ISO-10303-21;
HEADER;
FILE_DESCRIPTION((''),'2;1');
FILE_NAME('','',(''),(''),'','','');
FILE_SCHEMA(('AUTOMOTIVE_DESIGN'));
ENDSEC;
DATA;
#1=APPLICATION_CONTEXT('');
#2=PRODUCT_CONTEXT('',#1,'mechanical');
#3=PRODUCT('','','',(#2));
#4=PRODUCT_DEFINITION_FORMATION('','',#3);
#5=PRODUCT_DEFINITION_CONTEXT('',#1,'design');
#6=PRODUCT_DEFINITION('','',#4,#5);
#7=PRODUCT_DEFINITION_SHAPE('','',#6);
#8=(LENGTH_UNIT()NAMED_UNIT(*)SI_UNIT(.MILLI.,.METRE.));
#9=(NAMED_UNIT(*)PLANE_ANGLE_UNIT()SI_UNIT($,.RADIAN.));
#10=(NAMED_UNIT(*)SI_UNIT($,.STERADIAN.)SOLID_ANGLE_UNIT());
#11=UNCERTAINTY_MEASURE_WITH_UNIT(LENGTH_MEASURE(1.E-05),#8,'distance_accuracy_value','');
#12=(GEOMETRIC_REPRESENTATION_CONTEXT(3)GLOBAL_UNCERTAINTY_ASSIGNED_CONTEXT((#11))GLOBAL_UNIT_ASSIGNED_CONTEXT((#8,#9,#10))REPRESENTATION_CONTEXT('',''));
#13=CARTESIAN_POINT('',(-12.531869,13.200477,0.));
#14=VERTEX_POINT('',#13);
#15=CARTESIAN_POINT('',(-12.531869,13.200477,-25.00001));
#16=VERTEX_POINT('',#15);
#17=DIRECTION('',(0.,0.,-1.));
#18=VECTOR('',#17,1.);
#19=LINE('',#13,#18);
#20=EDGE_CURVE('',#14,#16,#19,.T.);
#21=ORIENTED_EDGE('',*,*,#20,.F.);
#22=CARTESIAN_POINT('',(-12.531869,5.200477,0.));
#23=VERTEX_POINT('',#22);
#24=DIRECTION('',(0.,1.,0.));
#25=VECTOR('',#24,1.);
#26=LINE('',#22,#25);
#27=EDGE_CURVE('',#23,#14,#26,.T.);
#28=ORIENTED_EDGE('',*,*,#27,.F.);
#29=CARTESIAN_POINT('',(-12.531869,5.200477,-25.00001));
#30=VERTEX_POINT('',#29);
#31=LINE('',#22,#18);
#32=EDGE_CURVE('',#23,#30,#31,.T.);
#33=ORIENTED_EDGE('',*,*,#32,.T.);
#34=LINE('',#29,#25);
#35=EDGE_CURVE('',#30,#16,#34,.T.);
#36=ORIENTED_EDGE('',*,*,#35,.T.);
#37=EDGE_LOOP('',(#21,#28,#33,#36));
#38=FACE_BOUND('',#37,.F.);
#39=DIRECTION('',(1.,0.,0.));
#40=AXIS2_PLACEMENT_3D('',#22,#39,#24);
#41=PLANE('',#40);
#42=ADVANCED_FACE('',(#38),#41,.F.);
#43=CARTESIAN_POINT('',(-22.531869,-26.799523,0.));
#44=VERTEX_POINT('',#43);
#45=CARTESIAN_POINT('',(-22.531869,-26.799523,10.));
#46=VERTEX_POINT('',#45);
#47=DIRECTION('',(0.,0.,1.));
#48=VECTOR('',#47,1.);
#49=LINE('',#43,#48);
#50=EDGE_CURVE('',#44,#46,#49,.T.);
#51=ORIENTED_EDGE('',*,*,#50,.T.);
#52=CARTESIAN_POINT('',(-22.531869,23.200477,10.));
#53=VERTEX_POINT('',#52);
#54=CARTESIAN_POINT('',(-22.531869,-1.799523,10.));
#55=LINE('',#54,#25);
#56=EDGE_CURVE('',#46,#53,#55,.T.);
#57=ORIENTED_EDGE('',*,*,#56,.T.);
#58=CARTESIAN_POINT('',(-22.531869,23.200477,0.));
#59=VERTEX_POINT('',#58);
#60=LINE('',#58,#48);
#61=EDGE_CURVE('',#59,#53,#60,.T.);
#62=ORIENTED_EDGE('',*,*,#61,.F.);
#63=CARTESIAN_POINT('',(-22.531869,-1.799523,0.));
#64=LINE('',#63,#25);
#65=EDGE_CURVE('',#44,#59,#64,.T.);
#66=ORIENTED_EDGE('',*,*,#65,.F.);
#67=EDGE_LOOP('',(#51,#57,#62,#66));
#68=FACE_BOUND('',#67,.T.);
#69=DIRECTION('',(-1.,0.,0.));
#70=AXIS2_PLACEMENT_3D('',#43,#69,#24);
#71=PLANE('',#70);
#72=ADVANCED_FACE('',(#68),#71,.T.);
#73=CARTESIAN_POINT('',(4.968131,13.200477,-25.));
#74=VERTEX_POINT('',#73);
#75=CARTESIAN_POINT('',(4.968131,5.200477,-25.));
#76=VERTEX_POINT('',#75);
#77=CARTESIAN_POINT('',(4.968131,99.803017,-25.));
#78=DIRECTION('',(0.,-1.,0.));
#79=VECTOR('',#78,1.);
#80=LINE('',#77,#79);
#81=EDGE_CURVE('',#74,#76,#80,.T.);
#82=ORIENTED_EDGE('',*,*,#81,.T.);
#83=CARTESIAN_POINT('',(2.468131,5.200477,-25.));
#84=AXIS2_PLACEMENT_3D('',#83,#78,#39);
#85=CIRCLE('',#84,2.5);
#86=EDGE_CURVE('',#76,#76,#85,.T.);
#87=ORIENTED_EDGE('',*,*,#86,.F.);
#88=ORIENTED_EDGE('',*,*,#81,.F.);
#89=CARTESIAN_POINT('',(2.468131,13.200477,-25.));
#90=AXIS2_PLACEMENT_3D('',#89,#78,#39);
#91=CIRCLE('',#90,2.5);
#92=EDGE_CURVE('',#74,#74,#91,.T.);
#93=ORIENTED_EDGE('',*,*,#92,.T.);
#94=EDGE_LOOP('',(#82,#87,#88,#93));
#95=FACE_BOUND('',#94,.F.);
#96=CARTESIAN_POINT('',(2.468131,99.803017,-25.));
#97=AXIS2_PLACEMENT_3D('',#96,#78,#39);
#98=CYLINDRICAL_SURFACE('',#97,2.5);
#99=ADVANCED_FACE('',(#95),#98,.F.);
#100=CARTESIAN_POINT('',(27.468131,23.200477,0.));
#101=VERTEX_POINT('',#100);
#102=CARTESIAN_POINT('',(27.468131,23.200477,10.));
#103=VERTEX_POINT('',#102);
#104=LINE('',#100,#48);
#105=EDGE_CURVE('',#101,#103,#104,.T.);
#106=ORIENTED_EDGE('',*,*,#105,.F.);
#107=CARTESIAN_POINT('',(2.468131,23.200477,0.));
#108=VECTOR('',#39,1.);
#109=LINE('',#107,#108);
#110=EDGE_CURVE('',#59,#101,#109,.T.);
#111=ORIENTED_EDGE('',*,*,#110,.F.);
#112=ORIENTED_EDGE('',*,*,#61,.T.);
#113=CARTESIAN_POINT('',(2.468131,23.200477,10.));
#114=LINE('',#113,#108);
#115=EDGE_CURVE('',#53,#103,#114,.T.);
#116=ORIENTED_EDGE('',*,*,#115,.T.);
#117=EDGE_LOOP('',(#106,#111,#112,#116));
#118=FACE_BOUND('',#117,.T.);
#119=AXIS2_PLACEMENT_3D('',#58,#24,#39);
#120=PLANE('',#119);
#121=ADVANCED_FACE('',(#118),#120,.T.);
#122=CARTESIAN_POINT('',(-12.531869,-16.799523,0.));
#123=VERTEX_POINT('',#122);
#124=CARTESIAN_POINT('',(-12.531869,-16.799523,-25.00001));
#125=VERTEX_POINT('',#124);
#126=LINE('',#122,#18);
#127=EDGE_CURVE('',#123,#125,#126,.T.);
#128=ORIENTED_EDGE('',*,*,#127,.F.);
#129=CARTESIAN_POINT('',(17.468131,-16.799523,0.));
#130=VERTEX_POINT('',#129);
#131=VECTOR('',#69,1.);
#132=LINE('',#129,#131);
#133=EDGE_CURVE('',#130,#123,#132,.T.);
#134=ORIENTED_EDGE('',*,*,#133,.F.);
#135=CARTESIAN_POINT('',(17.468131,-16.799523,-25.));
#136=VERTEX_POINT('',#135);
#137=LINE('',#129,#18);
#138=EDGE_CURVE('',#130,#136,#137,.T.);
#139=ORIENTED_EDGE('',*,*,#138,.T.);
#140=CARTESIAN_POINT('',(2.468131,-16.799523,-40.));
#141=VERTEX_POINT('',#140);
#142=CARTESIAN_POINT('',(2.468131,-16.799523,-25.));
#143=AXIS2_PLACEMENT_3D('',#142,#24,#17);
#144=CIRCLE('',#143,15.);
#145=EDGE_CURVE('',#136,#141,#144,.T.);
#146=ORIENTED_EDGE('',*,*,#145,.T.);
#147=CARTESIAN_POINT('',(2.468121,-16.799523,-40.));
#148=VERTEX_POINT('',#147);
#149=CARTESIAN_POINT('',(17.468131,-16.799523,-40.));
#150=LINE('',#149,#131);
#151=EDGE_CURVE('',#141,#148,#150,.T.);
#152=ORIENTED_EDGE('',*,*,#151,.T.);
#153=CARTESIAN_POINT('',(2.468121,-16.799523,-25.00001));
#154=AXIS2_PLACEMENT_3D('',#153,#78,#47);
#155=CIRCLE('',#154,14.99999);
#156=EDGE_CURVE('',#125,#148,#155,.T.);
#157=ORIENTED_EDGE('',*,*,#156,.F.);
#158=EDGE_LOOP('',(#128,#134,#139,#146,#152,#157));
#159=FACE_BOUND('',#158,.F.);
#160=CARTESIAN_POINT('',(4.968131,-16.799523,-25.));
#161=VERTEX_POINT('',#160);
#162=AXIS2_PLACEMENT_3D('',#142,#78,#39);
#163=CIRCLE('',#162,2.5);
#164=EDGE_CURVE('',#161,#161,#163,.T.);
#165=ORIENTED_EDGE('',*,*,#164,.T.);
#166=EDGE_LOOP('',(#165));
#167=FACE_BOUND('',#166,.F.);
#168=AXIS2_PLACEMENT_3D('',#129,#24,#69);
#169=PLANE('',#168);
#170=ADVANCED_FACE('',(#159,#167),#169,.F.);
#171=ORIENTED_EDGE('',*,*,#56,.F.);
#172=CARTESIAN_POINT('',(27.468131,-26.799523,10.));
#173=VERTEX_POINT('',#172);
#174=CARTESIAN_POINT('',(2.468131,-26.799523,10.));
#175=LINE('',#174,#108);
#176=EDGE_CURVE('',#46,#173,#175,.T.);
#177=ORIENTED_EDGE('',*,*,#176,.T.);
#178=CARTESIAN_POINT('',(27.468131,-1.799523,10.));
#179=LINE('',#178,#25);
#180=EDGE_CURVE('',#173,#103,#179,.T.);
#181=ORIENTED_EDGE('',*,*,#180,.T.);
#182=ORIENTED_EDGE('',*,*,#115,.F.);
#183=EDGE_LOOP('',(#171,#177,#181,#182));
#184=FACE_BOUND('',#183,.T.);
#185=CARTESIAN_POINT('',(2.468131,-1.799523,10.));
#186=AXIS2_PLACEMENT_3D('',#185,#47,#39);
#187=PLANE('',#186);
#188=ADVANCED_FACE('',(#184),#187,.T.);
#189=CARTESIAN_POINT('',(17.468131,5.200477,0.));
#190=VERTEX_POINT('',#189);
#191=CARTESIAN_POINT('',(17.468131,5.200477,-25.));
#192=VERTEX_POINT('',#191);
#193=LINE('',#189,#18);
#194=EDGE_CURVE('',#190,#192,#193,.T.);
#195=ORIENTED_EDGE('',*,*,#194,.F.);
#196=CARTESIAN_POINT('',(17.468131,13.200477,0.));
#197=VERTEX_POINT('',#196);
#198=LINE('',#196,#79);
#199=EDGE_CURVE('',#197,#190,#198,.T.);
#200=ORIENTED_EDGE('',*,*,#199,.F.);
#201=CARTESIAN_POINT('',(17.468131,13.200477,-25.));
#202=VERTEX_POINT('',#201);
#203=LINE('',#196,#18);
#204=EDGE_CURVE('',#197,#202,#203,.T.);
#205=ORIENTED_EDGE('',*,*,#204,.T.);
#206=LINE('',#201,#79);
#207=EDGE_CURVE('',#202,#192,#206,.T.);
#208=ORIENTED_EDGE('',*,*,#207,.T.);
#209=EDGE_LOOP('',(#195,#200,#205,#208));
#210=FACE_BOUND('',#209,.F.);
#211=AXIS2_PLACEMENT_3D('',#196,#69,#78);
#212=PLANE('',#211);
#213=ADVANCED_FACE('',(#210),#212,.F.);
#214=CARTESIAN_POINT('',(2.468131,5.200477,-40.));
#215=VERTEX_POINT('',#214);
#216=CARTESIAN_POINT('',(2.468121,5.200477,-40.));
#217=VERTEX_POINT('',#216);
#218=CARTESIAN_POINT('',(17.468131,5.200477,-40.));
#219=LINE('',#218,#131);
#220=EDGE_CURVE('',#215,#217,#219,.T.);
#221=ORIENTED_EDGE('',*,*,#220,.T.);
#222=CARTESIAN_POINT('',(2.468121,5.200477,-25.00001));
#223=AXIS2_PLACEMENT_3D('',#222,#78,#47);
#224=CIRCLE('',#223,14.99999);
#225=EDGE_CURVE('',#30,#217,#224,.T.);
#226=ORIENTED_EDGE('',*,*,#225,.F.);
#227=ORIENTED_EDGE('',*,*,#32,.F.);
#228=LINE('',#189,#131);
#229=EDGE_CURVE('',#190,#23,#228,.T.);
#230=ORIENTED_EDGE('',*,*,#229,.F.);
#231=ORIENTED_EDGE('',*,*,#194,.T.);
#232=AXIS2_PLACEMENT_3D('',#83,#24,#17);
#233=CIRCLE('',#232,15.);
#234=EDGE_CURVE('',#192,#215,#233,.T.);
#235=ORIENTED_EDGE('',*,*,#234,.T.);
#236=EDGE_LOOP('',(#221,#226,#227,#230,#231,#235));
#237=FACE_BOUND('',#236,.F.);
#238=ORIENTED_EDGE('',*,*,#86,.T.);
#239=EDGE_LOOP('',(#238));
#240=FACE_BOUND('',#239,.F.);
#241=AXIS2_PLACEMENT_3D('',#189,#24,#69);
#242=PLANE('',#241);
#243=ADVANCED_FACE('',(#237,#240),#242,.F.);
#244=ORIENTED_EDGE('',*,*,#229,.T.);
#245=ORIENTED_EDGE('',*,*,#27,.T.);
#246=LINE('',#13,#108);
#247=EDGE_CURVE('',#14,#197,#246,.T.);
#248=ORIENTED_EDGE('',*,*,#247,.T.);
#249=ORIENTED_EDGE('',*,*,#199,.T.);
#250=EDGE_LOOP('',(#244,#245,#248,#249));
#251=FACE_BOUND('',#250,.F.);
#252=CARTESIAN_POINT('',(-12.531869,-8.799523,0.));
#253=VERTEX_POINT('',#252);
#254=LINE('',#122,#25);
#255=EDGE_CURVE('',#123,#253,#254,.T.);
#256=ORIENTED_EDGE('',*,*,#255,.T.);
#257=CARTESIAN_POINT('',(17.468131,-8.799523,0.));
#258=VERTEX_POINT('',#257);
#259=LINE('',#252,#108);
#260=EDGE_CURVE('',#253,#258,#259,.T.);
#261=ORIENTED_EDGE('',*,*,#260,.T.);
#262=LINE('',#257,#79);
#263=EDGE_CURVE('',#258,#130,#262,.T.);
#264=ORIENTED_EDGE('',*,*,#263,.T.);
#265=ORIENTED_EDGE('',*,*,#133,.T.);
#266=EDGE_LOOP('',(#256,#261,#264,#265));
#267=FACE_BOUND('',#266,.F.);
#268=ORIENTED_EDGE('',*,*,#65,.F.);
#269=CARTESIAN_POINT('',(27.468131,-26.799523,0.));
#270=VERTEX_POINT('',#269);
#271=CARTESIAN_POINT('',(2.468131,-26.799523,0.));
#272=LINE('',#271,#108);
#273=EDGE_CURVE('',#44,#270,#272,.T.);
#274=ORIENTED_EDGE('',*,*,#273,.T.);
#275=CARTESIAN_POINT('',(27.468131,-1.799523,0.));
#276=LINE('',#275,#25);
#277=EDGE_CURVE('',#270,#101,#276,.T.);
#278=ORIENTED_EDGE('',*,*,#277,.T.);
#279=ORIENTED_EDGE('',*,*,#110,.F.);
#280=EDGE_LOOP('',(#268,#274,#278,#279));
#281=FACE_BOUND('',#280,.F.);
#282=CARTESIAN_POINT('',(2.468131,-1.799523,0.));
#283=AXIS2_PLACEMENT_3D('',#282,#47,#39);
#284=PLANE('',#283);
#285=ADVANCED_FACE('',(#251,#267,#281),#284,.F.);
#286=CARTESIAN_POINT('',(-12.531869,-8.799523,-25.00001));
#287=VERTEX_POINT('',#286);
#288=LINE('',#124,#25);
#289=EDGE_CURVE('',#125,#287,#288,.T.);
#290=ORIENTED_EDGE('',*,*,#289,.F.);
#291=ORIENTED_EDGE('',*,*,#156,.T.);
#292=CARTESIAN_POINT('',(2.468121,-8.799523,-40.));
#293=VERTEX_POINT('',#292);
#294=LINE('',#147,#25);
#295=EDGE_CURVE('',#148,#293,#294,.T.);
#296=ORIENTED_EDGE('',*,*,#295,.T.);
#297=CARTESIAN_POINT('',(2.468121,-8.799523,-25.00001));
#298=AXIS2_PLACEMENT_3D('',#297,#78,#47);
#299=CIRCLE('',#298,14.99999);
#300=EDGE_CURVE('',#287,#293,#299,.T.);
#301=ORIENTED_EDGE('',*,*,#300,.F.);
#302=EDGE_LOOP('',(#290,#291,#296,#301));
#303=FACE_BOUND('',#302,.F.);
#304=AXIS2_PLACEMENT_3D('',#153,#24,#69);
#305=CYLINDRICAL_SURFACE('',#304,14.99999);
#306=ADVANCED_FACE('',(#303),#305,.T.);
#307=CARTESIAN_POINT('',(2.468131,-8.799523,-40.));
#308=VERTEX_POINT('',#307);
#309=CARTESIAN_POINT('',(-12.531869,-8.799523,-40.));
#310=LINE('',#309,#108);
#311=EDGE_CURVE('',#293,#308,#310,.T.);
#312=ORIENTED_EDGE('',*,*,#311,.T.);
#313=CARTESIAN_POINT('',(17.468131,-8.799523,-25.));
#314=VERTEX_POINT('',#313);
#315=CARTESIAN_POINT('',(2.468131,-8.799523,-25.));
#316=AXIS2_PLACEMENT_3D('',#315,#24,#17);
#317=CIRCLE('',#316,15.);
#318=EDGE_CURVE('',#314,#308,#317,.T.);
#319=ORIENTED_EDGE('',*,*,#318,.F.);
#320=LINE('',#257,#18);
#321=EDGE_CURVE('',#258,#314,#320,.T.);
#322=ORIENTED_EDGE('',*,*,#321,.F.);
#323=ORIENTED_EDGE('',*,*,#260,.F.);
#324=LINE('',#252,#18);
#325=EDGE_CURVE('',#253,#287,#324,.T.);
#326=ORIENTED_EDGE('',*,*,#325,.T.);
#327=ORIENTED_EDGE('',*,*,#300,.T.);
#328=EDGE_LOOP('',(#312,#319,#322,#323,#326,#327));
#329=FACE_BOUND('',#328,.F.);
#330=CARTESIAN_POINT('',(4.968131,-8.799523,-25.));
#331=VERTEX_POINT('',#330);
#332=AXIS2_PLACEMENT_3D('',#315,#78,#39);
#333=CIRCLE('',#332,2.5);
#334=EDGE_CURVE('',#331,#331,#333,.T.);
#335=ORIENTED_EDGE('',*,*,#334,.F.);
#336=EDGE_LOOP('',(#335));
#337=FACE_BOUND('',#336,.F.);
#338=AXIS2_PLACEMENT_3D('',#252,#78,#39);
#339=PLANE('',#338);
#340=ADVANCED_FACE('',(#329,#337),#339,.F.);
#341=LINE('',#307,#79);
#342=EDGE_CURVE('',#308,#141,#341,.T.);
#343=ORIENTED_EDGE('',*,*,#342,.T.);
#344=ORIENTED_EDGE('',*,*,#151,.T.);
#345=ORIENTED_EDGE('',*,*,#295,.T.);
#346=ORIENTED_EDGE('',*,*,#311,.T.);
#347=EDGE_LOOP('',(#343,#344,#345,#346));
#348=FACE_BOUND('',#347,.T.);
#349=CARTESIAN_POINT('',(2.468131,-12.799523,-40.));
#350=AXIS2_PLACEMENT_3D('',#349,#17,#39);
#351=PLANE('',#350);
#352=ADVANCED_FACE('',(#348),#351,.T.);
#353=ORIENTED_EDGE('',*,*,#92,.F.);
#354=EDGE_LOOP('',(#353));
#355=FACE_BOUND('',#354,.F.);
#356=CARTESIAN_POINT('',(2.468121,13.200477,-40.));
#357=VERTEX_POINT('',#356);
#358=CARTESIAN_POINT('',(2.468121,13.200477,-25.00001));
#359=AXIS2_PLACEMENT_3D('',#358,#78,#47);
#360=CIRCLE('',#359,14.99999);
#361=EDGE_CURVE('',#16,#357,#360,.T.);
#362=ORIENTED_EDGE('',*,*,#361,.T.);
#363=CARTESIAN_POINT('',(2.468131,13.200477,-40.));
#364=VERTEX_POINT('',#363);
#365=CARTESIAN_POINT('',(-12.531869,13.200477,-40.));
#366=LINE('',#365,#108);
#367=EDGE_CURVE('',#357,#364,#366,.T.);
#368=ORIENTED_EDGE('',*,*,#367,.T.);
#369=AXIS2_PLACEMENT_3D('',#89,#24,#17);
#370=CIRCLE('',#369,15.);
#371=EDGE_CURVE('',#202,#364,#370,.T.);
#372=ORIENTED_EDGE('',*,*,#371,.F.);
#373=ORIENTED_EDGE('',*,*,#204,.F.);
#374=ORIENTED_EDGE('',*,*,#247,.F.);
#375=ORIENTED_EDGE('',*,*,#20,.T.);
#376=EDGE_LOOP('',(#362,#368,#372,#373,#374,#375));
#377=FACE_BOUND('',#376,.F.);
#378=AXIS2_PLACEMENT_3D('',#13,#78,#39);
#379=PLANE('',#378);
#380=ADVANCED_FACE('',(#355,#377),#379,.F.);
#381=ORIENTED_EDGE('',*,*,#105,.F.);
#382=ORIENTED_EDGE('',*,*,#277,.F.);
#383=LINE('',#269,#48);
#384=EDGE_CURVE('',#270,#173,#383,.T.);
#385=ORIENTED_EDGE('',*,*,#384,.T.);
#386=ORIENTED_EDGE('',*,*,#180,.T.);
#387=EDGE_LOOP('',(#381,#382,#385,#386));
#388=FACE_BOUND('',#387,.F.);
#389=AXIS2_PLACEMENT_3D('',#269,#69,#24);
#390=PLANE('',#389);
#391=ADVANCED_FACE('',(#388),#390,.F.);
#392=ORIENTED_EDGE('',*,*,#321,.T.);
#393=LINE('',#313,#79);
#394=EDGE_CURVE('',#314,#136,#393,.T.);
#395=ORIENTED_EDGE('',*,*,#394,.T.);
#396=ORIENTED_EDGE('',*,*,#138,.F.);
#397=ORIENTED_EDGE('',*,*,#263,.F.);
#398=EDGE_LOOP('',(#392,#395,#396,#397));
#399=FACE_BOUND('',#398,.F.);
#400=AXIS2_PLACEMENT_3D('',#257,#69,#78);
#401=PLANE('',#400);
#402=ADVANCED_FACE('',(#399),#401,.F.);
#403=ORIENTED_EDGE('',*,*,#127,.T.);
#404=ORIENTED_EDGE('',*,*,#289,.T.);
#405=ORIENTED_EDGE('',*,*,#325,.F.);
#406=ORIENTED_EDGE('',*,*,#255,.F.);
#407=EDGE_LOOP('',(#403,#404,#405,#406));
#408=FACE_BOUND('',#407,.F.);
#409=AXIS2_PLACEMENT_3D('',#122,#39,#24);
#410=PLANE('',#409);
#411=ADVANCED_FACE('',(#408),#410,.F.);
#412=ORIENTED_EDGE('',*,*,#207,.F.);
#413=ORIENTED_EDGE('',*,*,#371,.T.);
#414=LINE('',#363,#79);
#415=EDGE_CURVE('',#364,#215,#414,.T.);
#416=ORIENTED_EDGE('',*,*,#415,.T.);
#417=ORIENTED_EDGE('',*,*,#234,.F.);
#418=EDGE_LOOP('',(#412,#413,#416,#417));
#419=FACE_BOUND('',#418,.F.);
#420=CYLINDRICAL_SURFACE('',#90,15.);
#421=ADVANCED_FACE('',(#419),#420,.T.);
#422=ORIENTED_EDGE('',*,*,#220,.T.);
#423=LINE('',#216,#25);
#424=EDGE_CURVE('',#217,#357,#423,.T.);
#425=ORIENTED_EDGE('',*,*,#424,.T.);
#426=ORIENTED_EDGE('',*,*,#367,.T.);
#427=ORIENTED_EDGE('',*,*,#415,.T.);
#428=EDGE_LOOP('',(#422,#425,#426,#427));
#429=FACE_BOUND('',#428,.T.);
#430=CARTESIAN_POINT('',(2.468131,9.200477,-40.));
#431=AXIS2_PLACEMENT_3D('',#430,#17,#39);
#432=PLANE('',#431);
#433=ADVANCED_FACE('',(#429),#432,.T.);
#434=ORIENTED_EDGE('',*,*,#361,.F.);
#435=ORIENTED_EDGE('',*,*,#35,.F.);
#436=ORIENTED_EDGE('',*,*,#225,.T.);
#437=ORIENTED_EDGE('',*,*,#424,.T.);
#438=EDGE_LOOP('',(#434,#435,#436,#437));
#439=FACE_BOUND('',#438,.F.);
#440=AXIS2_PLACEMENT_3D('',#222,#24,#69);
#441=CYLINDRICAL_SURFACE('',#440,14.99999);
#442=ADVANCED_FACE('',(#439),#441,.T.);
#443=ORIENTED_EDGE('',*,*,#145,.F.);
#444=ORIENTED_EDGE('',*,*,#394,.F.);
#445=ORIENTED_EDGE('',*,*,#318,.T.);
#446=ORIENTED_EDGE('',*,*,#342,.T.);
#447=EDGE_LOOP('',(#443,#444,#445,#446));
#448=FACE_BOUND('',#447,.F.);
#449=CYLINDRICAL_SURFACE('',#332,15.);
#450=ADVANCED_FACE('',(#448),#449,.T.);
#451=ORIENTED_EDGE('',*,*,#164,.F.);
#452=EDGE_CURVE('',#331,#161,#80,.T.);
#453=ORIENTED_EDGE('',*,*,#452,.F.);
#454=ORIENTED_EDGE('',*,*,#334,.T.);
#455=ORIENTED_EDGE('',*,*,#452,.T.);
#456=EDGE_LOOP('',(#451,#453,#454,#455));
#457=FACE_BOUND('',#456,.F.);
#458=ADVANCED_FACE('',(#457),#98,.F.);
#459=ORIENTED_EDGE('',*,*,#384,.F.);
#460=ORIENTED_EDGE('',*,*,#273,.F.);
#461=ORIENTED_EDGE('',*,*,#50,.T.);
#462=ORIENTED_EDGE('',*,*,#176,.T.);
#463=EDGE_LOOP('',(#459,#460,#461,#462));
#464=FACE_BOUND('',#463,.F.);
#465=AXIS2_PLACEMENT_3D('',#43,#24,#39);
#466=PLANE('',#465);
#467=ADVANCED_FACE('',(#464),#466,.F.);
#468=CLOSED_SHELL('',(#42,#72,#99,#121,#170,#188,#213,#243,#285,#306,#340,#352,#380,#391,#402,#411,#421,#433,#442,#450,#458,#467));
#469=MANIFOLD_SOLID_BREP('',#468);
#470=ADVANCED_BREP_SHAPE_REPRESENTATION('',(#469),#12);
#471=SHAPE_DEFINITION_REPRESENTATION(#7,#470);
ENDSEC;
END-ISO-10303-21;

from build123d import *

# Parameters (mm, degrees)
F0_W     = 50
F0_H     = 50
F1_DEPTH = 10
F3_DEPTH = 40
F4_R     = 15
F5_R     = 15
F6_R     = 14.99999
F7_R     = 14.99999
F9_D     = 5


# Not quite as in the source:
# - a fillet or chamfer is up to 0.001 mm smaller than in the source, because OpenCascade refuses the exact size


with BuildPart() as f1:
    # F0 (on Top) → F1 (new body)
    with BuildSketch(Plane.XY):
        with Locations((2.4681314826, -1.799523242)):
            Rectangle(F0_W, F0_H)
    extrude(amount=F1_DEPTH)

    # F2 (on face) → F3 (join)
    with BuildSketch(Plane(origin=(0, 0, 0), x_dir=(1, 0, 0), z_dir=(0, 0, -1))):
        Polygon((2.4681314826, 16.799523242), (-12.5318685174, 16.799523242), (-12.5318685174, 8.799523242), (17.4681314826, 8.799523242), (17.4681314826, 12.799523242), (17.4681314826, 16.799523242), align=None)
        Polygon((-12.5318685174, -5.200476758), (-12.5318685174, -9.200476758), (-12.5318685174, -13.200476758), (2.4681314826, -13.200476758), (17.4681314826, -13.200476758), (17.4681314826, -5.200476758), align=None)
    extrude(amount=F3_DEPTH)

    # F4
    f4_edges = [f1.edges().sort_by_distance(p)[0] for p in [
        (17.468131, 9.200477, -40),
    ]]
    fillet(f4_edges, radius=F4_R)

    # F5
    f5_edges = [f1.edges().sort_by_distance(p)[0] for p in [
        (17.468131, -12.799523, -40),
    ]]
    fillet(f5_edges, radius=F5_R)

    # F6 (radius 15 in the source; OpenCascade refuses exactly that, so slightly less here)
    f6_edges = [f1.edges().sort_by_distance(p)[0] for p in [
        (-12.531869, 9.200477, -40),
    ]]
    fillet(f6_edges, radius=F6_R)

    # F7 (radius 15 in the source; OpenCascade refuses exactly that, so slightly less here)
    f7_edges = [f1.edges().sort_by_distance(p)[0] for p in [
        (-12.531869, -12.799523, -40),
    ]]
    fillet(f7_edges, radius=F7_R)

    # F9 (through all)
    with Locations(Plane(origin=(0, 13.200476758, 0), x_dir=(-1, 0, 0), z_dir=(0, 1, 0))):
        with Locations((-2.4681314826, -25)):
            Hole(F9_D / 2)


solid = f1.part
